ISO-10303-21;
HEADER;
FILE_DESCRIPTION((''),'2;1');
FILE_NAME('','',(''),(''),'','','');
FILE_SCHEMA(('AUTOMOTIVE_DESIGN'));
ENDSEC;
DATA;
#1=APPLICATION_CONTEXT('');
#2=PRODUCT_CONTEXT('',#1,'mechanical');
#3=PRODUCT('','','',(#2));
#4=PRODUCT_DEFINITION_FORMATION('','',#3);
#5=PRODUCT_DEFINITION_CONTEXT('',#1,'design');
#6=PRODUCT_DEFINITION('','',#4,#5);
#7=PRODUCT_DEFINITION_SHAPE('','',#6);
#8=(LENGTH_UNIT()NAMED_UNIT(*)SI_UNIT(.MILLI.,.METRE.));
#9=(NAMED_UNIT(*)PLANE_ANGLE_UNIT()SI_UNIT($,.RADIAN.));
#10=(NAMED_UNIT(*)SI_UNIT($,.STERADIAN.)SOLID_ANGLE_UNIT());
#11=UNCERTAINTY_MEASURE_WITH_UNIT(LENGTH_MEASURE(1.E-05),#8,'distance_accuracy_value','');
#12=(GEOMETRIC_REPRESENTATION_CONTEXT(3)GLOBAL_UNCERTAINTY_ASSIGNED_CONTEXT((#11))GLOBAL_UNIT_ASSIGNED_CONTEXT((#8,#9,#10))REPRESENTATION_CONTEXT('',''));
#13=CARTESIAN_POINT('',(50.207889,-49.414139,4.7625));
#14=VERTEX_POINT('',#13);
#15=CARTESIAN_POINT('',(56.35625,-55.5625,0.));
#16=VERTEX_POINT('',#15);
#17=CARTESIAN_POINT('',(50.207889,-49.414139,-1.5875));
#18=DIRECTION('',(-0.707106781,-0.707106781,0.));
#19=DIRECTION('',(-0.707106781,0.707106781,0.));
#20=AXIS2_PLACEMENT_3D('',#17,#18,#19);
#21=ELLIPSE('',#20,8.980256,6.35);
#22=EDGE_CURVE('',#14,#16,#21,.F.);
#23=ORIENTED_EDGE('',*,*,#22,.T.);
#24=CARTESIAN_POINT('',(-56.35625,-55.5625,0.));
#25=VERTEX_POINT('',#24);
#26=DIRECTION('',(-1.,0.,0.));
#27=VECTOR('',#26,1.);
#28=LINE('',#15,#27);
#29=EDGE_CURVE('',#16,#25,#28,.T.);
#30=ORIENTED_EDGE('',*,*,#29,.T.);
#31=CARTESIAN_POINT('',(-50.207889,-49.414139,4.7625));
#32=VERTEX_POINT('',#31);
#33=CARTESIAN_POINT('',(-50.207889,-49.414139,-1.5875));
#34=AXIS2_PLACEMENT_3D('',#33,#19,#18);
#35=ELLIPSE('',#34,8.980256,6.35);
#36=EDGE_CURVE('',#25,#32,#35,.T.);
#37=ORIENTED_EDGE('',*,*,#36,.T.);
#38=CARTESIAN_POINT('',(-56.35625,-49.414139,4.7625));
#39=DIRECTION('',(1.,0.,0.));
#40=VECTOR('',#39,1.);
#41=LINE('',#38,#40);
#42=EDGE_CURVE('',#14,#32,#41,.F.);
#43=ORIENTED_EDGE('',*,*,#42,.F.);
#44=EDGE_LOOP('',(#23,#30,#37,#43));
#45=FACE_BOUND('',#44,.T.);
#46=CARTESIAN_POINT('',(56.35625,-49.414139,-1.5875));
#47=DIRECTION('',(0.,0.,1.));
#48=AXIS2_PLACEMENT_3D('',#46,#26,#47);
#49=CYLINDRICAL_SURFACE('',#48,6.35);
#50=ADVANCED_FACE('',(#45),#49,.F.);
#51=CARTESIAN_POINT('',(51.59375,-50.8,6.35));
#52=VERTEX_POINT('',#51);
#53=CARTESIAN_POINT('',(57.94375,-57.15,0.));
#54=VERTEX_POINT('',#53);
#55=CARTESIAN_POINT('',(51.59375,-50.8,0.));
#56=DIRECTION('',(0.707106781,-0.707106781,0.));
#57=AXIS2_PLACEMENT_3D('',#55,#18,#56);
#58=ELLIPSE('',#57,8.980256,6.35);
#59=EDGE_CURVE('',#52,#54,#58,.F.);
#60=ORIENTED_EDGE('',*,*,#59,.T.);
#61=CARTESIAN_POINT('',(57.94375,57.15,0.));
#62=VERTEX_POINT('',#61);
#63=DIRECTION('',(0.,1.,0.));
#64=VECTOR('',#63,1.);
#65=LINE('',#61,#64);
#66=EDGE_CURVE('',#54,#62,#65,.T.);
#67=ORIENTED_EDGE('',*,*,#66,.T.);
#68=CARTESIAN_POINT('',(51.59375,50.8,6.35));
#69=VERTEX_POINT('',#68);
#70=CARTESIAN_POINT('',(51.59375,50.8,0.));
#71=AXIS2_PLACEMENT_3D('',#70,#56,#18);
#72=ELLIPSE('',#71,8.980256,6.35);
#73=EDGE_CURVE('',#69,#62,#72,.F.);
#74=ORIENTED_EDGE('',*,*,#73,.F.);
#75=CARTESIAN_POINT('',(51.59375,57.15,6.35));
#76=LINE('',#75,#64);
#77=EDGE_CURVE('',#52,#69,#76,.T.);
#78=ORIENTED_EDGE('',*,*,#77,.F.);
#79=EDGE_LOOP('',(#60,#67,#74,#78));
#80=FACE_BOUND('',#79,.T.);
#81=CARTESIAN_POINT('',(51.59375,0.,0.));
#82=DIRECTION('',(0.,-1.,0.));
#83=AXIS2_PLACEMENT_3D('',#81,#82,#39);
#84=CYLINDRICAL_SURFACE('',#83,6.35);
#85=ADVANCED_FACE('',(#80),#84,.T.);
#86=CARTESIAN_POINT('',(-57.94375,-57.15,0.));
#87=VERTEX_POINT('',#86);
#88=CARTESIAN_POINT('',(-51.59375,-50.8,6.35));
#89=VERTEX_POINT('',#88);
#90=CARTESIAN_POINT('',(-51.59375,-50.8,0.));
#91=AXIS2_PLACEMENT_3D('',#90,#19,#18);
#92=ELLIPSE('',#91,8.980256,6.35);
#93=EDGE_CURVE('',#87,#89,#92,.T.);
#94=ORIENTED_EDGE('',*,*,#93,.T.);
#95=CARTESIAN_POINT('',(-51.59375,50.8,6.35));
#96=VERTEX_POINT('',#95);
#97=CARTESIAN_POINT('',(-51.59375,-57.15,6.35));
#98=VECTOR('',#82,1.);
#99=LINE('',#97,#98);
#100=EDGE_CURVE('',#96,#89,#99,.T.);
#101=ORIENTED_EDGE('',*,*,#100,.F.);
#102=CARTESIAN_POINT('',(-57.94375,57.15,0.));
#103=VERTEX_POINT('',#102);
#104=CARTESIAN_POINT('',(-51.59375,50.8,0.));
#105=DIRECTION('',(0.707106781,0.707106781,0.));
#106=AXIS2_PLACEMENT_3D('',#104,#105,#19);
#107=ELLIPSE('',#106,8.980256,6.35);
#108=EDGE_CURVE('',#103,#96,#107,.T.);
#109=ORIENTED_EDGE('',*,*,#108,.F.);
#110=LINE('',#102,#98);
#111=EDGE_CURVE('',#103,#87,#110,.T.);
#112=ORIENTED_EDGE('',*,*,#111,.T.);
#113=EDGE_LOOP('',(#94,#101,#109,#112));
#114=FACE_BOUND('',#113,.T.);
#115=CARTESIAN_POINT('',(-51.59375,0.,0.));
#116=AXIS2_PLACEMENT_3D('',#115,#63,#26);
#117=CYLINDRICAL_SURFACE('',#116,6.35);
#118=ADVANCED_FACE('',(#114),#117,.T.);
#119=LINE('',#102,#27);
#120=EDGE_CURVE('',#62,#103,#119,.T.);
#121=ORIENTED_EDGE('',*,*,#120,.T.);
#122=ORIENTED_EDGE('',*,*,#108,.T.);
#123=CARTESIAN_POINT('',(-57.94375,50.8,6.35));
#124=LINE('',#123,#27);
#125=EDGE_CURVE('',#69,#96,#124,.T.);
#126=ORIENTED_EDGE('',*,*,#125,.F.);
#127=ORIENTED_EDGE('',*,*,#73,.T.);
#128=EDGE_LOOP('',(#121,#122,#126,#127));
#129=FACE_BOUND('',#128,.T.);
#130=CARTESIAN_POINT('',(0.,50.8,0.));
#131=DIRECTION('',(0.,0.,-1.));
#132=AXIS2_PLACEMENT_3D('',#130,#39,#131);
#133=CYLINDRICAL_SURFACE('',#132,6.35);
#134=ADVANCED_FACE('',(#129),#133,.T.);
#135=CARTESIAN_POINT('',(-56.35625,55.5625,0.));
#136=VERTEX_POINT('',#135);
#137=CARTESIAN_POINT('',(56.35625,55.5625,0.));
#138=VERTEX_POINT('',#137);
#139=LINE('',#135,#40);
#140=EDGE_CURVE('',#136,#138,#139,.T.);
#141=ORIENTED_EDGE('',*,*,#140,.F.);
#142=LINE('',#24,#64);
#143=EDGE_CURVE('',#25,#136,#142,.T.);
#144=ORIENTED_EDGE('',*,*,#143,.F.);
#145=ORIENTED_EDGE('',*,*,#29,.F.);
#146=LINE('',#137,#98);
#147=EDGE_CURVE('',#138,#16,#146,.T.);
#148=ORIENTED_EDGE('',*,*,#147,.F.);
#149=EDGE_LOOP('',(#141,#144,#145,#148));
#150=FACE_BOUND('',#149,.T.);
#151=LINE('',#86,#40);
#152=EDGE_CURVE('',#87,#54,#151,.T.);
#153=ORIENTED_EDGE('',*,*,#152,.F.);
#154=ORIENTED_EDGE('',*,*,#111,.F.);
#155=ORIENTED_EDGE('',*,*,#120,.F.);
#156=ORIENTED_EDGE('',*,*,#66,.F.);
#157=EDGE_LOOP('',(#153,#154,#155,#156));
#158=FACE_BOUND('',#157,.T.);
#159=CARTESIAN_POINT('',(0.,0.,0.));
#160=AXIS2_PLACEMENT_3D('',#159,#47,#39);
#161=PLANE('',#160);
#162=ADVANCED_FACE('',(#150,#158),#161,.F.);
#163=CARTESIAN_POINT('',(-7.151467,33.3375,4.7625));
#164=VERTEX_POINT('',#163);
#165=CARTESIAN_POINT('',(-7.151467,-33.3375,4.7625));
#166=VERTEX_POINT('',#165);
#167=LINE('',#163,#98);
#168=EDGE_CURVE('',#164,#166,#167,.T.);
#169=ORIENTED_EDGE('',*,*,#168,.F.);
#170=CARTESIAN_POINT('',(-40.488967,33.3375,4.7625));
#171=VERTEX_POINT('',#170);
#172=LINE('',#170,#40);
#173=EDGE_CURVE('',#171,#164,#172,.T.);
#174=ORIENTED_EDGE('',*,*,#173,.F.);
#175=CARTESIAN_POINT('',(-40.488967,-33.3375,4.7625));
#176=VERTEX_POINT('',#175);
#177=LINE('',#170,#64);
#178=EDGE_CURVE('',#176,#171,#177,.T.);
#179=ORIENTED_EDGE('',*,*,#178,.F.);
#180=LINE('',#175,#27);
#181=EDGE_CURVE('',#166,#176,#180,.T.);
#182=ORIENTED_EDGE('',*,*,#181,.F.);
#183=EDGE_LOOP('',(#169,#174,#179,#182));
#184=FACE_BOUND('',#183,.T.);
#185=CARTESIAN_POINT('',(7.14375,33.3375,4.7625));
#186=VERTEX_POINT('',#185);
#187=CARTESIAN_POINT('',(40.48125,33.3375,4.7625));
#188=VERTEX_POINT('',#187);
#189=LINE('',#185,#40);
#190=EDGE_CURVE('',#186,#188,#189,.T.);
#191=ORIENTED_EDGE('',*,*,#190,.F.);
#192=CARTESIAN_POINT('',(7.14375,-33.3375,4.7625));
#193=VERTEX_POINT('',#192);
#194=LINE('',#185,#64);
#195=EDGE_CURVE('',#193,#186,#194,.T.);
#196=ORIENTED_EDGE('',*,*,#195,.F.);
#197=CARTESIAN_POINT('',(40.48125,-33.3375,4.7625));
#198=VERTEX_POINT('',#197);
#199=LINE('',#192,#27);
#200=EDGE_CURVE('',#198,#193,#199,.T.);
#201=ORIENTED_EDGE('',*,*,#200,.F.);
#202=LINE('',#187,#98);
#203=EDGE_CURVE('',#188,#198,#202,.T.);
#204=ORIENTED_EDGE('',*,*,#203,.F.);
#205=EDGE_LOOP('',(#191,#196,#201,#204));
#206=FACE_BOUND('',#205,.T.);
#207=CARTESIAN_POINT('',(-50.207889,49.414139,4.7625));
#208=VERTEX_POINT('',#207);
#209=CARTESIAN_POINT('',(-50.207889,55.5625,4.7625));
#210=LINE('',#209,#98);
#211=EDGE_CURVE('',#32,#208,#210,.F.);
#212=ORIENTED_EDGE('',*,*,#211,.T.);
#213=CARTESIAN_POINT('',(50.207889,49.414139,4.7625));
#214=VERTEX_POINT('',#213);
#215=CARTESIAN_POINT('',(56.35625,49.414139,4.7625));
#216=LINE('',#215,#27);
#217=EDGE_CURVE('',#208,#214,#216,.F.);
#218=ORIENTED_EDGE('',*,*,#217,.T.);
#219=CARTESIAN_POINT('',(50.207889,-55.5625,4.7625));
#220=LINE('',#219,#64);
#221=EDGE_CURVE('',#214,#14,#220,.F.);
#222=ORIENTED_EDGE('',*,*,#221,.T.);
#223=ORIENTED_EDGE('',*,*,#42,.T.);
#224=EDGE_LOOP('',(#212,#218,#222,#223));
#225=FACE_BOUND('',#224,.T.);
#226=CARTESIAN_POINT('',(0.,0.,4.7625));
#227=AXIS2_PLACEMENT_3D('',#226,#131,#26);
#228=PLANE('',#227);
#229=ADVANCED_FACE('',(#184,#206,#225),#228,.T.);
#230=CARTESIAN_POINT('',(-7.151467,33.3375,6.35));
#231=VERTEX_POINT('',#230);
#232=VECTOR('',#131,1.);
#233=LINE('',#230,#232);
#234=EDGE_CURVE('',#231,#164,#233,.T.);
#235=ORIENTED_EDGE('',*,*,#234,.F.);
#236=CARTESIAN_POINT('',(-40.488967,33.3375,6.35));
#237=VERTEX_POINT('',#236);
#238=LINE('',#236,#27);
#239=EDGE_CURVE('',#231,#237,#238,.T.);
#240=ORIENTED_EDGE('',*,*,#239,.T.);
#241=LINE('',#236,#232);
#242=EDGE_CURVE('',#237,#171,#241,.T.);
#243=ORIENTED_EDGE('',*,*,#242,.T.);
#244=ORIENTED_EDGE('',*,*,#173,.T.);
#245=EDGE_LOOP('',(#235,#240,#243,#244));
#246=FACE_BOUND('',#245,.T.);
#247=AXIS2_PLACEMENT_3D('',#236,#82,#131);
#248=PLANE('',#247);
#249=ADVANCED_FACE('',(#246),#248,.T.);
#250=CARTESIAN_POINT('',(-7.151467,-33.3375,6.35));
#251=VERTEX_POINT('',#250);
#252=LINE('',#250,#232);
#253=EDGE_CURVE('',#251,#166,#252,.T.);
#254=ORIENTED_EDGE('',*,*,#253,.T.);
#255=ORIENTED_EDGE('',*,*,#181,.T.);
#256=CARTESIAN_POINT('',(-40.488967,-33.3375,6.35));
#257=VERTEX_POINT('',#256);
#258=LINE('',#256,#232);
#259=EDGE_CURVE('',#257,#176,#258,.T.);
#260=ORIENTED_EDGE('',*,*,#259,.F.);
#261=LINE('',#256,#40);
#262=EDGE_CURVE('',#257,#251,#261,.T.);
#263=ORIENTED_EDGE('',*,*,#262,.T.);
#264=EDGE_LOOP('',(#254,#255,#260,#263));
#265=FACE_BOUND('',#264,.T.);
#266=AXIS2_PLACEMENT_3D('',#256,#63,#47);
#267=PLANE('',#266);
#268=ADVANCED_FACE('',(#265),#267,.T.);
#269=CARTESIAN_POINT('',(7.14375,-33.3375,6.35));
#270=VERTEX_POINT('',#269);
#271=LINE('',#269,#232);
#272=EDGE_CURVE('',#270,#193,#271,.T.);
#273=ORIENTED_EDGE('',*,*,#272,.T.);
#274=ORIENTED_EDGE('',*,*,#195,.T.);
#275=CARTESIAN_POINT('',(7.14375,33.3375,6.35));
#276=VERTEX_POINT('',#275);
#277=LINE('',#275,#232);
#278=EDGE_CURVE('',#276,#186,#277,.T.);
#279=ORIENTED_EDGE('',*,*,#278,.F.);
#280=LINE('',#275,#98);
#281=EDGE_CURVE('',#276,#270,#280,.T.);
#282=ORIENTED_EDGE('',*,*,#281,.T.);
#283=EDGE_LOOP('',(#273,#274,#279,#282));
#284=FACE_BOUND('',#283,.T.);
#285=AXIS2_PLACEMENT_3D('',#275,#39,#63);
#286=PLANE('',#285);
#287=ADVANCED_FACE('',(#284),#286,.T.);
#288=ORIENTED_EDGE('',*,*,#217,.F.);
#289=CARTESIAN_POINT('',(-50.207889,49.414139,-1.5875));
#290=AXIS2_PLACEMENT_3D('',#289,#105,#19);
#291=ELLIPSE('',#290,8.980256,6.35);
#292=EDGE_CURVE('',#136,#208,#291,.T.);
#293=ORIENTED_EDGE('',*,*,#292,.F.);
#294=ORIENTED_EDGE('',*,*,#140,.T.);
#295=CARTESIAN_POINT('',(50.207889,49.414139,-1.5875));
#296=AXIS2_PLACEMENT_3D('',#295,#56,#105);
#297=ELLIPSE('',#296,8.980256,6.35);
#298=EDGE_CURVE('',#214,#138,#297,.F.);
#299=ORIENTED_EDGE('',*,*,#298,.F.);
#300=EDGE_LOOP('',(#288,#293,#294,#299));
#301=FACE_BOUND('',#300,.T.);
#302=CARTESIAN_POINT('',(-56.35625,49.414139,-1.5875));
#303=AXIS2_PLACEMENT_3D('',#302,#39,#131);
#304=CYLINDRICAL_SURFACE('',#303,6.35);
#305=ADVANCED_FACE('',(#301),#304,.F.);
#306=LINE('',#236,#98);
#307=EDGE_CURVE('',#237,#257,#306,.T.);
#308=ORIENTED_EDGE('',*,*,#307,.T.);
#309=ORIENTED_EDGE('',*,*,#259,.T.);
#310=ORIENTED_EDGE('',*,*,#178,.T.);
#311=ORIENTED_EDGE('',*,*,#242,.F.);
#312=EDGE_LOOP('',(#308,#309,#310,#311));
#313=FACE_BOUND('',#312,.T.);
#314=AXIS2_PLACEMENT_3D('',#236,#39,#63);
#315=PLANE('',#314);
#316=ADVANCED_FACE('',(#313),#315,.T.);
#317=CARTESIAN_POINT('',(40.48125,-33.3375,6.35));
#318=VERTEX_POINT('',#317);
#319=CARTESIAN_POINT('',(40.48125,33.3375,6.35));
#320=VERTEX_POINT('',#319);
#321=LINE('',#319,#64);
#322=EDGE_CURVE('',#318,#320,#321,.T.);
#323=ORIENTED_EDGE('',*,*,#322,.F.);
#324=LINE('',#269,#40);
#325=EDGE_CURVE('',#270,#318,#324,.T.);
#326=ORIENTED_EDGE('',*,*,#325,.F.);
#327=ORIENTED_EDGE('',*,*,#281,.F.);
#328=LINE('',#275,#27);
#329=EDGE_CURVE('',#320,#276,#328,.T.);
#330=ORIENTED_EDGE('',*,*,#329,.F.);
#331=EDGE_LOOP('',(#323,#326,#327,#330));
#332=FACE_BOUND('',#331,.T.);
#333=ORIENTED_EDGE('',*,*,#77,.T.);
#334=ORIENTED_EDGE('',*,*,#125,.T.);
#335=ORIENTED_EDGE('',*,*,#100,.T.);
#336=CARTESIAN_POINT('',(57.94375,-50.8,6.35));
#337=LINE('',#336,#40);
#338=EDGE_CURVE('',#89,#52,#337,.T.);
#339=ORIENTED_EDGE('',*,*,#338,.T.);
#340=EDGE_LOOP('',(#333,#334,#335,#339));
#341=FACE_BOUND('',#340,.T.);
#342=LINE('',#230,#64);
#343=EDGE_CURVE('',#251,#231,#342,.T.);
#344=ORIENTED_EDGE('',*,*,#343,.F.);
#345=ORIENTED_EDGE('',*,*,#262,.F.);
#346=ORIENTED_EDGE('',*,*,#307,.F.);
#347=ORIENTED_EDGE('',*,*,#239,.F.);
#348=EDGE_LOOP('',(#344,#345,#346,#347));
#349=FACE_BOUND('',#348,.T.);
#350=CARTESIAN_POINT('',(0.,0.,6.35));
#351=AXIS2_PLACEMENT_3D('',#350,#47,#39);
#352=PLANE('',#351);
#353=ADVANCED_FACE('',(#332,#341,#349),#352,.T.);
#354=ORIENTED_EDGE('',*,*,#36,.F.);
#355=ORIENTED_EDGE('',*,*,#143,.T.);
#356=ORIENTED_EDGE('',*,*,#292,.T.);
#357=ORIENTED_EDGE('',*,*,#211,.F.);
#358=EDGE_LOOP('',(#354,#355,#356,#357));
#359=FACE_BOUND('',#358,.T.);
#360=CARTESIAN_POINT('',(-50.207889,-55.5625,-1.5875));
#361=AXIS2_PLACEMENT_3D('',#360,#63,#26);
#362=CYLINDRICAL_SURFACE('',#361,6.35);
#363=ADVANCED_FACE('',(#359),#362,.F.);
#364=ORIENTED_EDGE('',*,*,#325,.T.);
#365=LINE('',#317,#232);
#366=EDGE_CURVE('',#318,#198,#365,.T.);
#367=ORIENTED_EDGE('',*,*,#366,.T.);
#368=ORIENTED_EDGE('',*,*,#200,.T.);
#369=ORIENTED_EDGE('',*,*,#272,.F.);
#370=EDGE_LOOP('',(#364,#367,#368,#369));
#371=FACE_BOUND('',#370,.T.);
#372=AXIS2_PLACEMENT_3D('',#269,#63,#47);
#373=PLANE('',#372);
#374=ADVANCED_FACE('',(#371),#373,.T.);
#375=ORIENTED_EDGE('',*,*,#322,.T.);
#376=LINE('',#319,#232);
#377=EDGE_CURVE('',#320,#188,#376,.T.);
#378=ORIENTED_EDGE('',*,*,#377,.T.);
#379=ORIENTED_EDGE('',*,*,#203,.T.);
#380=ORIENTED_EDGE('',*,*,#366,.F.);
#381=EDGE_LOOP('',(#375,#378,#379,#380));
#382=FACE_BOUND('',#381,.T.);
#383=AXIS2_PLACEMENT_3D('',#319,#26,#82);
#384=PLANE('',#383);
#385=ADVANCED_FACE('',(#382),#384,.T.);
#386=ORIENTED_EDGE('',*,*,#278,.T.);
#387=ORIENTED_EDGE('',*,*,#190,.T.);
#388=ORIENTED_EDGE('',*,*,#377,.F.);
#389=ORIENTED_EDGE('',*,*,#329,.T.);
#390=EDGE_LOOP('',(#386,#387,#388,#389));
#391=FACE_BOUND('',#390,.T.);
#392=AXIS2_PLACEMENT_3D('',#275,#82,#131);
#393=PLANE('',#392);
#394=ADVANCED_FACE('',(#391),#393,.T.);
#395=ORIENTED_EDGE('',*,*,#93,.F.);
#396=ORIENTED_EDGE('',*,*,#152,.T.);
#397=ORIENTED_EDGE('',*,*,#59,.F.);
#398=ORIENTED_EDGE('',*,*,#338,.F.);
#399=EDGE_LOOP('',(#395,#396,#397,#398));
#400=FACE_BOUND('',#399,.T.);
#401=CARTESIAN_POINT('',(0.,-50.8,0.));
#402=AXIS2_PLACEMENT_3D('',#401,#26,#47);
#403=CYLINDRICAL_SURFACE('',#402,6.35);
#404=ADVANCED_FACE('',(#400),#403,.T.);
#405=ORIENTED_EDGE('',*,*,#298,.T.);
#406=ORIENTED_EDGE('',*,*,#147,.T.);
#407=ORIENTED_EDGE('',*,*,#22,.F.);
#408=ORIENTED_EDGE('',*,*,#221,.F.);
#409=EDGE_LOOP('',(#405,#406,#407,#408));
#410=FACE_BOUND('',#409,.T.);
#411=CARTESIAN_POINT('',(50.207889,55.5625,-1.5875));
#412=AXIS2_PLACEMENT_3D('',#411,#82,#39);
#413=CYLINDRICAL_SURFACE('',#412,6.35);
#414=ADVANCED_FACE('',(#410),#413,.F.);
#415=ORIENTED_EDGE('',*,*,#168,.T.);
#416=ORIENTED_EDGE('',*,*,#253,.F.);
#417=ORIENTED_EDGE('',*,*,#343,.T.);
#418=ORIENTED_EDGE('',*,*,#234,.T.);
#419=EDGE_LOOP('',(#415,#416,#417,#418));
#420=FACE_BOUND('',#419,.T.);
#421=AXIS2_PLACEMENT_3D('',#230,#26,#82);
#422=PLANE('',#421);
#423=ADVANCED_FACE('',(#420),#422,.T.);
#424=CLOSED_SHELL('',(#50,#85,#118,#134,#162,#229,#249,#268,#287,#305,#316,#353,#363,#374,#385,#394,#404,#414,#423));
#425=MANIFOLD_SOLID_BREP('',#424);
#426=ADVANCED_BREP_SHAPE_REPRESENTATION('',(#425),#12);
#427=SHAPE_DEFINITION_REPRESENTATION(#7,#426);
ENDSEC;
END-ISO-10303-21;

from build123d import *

# Parameters (mm, degrees)
SKETCH1_W           = 115.8875
SKETCH1_H           = 114.3
SKETCH1_W_2         = 33.3375
SKETCH1_H_2         = 66.675
BOSS_EXTRUDE1_DEPTH = 6.35
SKETCH2_W           = 112.7125
SKETCH2_H           = 111.125
CUT_EXTRUDE1_DEPTH  = 4.7625
FILLET2_R           = 6.35


with BuildPart() as part:
    # Sketch1 → Boss-Extrude1 (new body)
    with BuildSketch(Plane.XY):
        Rectangle(SKETCH1_W, SKETCH1_H)
        with Locations((-23.820216951, 0)):
            Rectangle(SKETCH1_W_2, SKETCH1_H_2, mode=Mode.SUBTRACT)
        with Locations((23.8125, 0)):
            Rectangle(SKETCH1_W_2, SKETCH1_H_2, mode=Mode.SUBTRACT)
    extrude(amount=BOSS_EXTRUDE1_DEPTH)

    # Sketch2 → Cut-Extrude1 (cut)
    with BuildSketch(Plane(origin=(0, 0, 0), x_dir=(-1, 0, 0), z_dir=(0, 0, -1))):
        Rectangle(SKETCH2_W, SKETCH2_H)
    extrude(amount=-CUT_EXTRUDE1_DEPTH, mode=Mode.SUBTRACT)

    # Fillet2
    # the kernel refuses this fillet: 6.35 mm, written as the material it adds along each edge
    with BuildSketch(Plane(origin=(56.35625, -55.5625, 4.7625), x_dir=(0, 0, -1), z_dir=(-1, 0, 0)), Plane(origin=(-56.35625, 55.5625, 4.7625), x_dir=(0, 0, -1), z_dir=(1, 0, 0))) as fillet2_piece_1:
        with BuildLine():
            CenterArc((6.35, -6.148361062), FILLET2_R, 104.477512186, 75.522487814)
            Line((0, -6.148361062), (0, 0))
            Line((0, 0), (4.7625, 0))
        make_face()
    extrude(amount=112.7125)
    with BuildSketch(Plane(origin=(-56.35625, -55.5625, 4.7625), x_dir=(0, 0, -1), z_dir=(0, 1, 0)), Plane(origin=(56.35625, 55.5625, 4.7625), x_dir=(0, 0, -1), z_dir=(0, -1, 0))) as fillet2_piece_2:
        with BuildLine():
            CenterArc((6.35, -6.148361062), FILLET2_R, 104.477512186, 75.522487814)
            Line((0, -6.148361062), (0, 0))
            Line((0, 0), (4.7625, 0))
        make_face()
    extrude(amount=111.125)
    # the kernel refuses this fillet: 6.35 mm, written as the material it takes off along each edge
    with BuildSketch(Plane(origin=(-73.81875, 57.15, 6.35), x_dir=(0, 0, -1), z_dir=(1, 0, 0))) as fillet2_2_piece_1:
        with BuildLine():
            CenterArc((FILLET2_R, -FILLET2_R), FILLET2_R, 90, 90)
            Line((0, -FILLET2_R), (0, 0))
            Line((0, 0), (FILLET2_R, 0))
        make_face()
    extrude(amount=147.6375, mode=Mode.SUBTRACT)
    with BuildSketch(Plane(origin=(-57.94375, -73.025, 6.35), x_dir=(0, 0, -1), z_dir=(0, 1, 0)), Plane(origin=(57.94375, 73.025, 6.35), x_dir=(0, 0, -1), z_dir=(0, -1, 0))) as fillet2_2_piece_2:
        with BuildLine():
            CenterArc((FILLET2_R, -FILLET2_R), FILLET2_R, 90, 90)
            Line((0, -FILLET2_R), (0, 0))
            Line((0, 0), (FILLET2_R, 0))
        make_face()
    extrude(amount=146.05, mode=Mode.SUBTRACT)
    with BuildSketch(Plane(origin=(73.81875, -57.15, 6.35), x_dir=(0, 1, 0), z_dir=(-1, 0, 0))) as fillet2_2_piece_3:
        with BuildLine():
            CenterArc((FILLET2_R, FILLET2_R), FILLET2_R, 180, 90)
            Line((0, FILLET2_R), (0, 0))
            Line((0, 0), (FILLET2_R, 0))
        make_face()
    extrude(amount=147.6375, mode=Mode.SUBTRACT)


solid = part.part
